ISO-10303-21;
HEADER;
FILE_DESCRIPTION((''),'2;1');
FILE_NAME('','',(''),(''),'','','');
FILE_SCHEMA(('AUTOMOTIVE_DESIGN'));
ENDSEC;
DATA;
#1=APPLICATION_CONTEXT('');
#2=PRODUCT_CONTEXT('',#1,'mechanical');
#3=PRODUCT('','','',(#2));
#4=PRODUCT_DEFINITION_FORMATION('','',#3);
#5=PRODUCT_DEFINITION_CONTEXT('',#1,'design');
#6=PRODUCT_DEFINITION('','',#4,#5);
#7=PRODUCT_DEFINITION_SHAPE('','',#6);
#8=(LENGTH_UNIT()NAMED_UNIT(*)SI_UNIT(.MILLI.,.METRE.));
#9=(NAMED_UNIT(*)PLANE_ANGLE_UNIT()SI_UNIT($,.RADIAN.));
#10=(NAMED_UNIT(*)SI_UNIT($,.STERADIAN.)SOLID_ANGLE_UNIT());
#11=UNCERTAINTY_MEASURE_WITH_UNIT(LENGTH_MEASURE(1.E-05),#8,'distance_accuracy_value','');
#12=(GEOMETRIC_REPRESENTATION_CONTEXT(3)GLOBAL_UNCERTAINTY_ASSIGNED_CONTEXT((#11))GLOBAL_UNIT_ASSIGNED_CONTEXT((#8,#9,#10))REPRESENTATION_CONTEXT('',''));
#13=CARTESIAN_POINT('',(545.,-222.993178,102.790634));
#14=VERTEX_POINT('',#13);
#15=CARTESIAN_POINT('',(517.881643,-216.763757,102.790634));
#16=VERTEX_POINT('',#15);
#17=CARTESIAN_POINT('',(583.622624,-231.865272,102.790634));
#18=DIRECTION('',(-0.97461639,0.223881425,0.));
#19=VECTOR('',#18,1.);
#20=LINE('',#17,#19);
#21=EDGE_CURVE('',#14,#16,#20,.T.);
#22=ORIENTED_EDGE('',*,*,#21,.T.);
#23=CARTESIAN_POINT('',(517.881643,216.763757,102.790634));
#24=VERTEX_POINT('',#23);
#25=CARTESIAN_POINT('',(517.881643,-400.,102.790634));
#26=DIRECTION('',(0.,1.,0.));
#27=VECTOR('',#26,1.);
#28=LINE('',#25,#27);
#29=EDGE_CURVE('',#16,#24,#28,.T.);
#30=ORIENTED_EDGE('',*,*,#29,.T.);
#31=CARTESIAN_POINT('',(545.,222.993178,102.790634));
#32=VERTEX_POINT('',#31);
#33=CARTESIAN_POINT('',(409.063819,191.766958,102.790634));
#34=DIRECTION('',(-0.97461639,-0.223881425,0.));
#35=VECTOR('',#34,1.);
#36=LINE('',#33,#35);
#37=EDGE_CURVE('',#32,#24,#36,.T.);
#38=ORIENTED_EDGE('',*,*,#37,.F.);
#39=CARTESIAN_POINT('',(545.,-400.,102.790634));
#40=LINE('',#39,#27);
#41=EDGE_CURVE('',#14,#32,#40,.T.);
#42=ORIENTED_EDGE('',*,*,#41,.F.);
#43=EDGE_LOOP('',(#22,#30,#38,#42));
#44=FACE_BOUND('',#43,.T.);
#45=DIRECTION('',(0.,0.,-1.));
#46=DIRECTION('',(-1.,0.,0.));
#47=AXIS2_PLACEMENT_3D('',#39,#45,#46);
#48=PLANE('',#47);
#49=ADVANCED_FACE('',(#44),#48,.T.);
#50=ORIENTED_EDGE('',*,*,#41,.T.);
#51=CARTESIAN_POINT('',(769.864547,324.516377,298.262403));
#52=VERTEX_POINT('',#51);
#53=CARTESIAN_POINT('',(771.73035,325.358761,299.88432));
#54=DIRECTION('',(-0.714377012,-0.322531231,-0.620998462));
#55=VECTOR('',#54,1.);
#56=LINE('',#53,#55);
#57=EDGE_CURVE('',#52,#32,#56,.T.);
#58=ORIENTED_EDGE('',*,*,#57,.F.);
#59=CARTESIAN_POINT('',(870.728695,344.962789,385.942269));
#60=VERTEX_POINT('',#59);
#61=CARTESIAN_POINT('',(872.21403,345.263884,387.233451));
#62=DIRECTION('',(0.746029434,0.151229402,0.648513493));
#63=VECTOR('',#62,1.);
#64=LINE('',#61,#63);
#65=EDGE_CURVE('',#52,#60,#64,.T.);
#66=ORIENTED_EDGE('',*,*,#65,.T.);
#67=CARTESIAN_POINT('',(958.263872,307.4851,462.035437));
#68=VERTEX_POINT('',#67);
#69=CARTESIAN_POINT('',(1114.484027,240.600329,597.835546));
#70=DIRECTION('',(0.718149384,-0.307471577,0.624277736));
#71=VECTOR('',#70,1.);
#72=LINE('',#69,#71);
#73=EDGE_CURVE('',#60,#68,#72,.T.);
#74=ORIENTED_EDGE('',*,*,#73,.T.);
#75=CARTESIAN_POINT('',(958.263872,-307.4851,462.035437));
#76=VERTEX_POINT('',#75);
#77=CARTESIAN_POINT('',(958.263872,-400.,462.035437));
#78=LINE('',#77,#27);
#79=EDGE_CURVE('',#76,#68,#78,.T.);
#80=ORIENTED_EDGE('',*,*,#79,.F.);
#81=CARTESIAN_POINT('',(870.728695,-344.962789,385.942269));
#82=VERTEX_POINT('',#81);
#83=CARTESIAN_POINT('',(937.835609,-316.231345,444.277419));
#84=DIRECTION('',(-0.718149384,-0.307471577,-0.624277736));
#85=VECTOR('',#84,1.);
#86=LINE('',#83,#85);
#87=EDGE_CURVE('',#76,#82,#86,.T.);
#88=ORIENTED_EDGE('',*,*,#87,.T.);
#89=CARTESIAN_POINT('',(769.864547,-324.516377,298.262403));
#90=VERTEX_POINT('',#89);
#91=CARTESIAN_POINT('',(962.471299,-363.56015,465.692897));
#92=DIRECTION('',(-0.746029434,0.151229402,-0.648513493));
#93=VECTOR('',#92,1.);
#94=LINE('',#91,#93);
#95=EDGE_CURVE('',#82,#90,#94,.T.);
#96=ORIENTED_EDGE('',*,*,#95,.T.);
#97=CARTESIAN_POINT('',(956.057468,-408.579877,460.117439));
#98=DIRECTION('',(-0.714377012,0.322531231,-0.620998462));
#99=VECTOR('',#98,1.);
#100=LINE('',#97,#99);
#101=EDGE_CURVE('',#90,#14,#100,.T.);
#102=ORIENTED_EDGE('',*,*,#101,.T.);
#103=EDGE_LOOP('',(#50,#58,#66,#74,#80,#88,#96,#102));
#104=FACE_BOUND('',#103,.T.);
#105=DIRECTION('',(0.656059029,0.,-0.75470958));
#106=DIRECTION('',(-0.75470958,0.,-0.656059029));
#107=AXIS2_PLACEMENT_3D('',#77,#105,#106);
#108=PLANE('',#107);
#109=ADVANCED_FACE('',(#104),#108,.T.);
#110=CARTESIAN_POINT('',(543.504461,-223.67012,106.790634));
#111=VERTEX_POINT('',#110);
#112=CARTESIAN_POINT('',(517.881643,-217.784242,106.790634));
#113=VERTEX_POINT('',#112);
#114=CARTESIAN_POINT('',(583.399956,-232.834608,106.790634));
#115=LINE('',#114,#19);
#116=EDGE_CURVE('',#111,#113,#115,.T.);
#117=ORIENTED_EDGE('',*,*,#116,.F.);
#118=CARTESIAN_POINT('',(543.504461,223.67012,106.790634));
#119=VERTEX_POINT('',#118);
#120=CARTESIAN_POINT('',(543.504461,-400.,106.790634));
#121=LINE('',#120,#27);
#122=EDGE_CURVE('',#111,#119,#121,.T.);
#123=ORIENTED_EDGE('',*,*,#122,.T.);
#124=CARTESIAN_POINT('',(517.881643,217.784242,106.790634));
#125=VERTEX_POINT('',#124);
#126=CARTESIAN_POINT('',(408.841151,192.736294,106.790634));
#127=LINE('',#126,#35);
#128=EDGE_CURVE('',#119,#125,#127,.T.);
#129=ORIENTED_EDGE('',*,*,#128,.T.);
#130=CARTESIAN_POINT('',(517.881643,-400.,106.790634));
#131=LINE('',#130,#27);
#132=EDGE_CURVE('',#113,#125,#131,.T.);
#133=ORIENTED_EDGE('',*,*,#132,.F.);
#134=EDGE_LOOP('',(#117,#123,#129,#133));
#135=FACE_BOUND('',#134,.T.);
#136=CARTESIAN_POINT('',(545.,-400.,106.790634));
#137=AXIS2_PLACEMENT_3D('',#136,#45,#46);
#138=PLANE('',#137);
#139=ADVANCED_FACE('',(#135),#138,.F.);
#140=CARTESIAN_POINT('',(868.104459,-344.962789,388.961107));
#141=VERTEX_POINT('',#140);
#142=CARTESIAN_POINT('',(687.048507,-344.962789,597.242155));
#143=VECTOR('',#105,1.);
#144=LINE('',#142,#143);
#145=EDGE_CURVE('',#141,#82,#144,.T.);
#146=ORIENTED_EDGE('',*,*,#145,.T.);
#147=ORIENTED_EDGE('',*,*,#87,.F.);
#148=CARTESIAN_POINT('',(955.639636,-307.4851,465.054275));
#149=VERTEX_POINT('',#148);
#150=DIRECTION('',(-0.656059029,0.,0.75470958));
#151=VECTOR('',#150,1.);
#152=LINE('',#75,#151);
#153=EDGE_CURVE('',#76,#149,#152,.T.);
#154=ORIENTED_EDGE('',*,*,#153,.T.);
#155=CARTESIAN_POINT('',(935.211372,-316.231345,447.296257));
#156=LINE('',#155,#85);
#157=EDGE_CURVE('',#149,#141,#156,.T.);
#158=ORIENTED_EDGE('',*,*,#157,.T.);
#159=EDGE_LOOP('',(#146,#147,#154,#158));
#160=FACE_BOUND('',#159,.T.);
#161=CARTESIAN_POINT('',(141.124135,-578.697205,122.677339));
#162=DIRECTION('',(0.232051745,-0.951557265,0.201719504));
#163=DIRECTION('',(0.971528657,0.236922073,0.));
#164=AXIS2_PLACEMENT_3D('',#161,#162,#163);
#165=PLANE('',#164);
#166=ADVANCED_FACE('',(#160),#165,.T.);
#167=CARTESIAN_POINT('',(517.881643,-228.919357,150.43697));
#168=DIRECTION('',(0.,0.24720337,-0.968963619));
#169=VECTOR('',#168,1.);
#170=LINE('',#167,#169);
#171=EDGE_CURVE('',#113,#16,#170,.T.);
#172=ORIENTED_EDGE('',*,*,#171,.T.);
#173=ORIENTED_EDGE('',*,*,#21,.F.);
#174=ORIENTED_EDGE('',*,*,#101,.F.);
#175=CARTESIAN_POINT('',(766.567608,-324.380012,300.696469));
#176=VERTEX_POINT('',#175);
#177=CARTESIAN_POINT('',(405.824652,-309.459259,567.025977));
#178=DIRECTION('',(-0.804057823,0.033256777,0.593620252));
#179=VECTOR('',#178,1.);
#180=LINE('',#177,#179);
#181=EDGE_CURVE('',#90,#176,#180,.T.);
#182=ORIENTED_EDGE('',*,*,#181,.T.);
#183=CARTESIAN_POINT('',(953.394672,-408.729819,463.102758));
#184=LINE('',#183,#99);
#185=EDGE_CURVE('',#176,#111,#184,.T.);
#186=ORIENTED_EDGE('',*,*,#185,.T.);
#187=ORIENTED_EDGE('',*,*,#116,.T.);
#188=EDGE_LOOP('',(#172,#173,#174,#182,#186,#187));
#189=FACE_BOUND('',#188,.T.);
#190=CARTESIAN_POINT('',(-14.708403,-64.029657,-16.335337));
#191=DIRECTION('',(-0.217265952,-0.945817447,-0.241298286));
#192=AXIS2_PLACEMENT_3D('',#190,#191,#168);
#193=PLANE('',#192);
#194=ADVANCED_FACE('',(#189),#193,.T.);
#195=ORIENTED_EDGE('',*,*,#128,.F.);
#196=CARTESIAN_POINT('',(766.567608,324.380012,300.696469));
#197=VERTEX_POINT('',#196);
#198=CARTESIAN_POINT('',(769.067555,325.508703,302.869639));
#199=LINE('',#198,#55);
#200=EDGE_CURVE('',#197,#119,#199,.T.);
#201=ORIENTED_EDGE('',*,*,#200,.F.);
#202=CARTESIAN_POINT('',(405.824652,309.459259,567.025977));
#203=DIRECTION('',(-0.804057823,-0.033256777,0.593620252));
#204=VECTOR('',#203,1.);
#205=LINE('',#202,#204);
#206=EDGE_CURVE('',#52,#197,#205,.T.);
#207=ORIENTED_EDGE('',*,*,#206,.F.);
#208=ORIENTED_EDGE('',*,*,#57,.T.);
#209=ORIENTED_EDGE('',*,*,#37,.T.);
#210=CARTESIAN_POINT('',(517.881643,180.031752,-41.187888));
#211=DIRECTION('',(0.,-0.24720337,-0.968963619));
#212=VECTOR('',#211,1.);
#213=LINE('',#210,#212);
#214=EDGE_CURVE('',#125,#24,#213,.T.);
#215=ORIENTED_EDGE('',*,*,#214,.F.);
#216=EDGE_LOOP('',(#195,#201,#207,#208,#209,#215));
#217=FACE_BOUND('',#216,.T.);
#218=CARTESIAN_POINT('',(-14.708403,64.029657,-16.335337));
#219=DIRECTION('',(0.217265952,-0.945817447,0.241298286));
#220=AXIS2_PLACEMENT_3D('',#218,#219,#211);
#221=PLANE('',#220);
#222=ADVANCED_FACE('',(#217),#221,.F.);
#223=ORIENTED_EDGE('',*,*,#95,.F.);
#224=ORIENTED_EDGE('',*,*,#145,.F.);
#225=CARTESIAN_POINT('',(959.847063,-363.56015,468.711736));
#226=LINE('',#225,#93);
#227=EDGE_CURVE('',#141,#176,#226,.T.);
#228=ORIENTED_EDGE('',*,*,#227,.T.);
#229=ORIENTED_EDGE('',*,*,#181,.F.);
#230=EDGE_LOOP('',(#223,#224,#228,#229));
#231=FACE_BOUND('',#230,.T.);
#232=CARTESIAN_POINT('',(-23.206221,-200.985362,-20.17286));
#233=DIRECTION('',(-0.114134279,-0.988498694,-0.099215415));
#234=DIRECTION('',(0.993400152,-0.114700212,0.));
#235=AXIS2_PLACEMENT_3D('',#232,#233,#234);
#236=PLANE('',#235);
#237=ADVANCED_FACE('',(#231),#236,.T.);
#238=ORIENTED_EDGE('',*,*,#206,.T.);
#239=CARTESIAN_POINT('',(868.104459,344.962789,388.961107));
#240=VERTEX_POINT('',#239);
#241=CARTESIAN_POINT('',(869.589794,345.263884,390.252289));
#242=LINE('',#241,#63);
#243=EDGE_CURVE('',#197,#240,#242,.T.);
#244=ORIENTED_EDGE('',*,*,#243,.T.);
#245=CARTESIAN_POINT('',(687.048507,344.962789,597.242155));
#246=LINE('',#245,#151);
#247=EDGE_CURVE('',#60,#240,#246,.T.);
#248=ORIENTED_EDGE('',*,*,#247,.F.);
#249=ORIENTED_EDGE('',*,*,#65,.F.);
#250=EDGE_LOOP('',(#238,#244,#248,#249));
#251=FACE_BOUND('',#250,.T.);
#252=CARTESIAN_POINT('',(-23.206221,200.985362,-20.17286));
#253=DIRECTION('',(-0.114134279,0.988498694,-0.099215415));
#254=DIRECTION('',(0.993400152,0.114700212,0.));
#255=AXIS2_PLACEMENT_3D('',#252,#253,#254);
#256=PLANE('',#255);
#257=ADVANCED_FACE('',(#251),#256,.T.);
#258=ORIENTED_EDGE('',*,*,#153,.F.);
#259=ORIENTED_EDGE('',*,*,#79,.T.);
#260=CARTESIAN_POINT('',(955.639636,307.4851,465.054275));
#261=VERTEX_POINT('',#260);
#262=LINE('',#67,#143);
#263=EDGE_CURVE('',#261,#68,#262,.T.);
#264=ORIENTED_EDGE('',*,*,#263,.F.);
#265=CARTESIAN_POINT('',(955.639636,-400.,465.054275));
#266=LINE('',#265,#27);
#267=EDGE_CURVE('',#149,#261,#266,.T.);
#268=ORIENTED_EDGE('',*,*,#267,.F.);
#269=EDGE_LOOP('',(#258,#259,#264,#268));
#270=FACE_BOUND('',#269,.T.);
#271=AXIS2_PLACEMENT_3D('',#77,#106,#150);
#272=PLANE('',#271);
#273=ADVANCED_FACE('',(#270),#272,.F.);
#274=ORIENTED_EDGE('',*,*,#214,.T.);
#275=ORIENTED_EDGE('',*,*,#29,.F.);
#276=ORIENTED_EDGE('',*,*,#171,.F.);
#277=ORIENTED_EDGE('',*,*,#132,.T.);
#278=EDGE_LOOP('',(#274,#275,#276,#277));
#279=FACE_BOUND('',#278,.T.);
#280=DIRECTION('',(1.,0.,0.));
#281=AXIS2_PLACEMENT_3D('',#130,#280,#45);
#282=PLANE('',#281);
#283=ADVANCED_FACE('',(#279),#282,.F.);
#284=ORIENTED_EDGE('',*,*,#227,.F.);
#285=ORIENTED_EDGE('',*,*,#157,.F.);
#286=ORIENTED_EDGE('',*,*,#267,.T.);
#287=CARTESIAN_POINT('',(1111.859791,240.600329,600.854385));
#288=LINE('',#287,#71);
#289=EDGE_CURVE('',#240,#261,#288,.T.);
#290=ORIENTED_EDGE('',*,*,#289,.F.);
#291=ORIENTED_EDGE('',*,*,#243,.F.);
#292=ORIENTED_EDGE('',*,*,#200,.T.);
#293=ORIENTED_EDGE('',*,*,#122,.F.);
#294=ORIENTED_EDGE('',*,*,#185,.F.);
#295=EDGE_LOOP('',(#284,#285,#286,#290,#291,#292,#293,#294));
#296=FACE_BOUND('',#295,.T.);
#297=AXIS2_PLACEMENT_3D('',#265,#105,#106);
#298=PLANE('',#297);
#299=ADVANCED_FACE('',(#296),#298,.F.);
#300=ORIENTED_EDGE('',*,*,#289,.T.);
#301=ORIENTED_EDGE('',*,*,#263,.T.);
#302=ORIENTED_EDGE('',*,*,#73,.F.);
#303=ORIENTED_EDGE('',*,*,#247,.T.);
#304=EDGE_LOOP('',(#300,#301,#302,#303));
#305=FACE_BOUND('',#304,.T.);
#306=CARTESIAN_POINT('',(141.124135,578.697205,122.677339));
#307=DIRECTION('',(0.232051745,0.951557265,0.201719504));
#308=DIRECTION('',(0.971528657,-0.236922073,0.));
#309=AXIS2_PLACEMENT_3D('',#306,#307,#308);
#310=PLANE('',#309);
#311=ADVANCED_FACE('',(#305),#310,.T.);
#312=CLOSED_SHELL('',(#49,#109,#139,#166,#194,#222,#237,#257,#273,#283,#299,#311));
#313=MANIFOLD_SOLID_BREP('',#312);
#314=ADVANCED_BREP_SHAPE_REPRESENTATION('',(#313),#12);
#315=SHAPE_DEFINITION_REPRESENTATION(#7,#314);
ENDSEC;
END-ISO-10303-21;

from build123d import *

# Parameters (mm, degrees)
WYCI_GNI_CIE_CIENKA_CIANKA1_DEPTH      = 400
WYCI_GNI_CIE_CIENKA_CIANKA1_DEPTH_BACK = 400
LUSTRO1_START                          = 275.975094607
LUSTRO1_DEPTH                          = 4


# Read off the part's stored shape, not the designer's step: Lustro1
with BuildPart() as part:
    # Szkic1 → Wyciągnięcie-cienka ścianka1 (new, two sides: drawn at the far end of the back side and taken through both)
    with BuildSketch(Plane(origin=(0, 0, 0), x_dir=(1, 0, 0), z_dir=(0, 1, 0)).offset(-WYCI_GNI_CIE_CIENKA_CIANKA1_DEPTH_BACK)):
        Polygon((958.263871938, -462.035437036), (545, -102.790633942), (517.881642578, -102.790633942), (517.881642578, -106.790633942), (543.504461282, -106.790633942), (955.639635822, -465.054275357), align=None)
    extrude(amount=WYCI_GNI_CIE_CIENKA_CIANKA1_DEPTH + WYCI_GNI_CIE_CIENKA_CIANKA1_DEPTH_BACK)

    # Cięcie powierzchnią3
    split(bisect_by=Plane(origin=(-14.708403282, 64.029657214, -16.335336758), x_dir=(0.6328754019355285, 0.32469887066665293, 0.7028793417171568), z_dir=(0.2172659522131463, -0.9458174471787886, 0.2412982855743377)), keep=Keep.TOP)

    # Cięcie powierzchnią4
    split(bisect_by=Plane(origin=(-14.708403282, -64.029657214, -16.335336758), x_dir=(0.6328754019353329, -0.32469887066665304, 0.7028793417173329), z_dir=(-0.21726595221314635, -0.9458174471787884, -0.24129828557433775)), keep=Keep.BOTTOM)

    # Cięcie powierzchnią5
    split(bisect_by=Plane(origin=(141.124135037, -578.697205105, 122.677338974), x_dir=(0.718149384400474, 0.30747157670526803, 0.6242777356302215), z_dir=(0.2320517445856664, -0.9515572654960797, 0.20171950405543876)), keep=Keep.BOTTOM)

    # Cięcie powierzchnią6
    split(bisect_by=Plane(origin=(-23.206221207, -200.985361995, -20.17286033), x_dir=(0.74602943431762, -0.15122940248105377, 0.6485134932728503), z_dir=(-0.11413427886381658, -0.9884986938915112, -0.09921541494653495)), keep=Keep.BOTTOM)

    # Lustro1 outline → Lustro1 (cut)
    with BuildSketch(Plane(origin=(0, 0, 0), x_dir=(0.754709580222771, 0, 0.6560590289905084), z_dir=(0.6560590289905085, 0, -0.7547095802227708)).offset(LUSTRO1_START)):
        Polygon((1026.333444714, -307.485100364), (910.348198503, -344.962788591), (775.810550903, -324.380011716), (774, -324.103017388), (774, -400), (1026.333444714, -400), align=None)
    extrude(amount=LUSTRO1_DEPTH, mode=Mode.SUBTRACT)


solid = part.part
